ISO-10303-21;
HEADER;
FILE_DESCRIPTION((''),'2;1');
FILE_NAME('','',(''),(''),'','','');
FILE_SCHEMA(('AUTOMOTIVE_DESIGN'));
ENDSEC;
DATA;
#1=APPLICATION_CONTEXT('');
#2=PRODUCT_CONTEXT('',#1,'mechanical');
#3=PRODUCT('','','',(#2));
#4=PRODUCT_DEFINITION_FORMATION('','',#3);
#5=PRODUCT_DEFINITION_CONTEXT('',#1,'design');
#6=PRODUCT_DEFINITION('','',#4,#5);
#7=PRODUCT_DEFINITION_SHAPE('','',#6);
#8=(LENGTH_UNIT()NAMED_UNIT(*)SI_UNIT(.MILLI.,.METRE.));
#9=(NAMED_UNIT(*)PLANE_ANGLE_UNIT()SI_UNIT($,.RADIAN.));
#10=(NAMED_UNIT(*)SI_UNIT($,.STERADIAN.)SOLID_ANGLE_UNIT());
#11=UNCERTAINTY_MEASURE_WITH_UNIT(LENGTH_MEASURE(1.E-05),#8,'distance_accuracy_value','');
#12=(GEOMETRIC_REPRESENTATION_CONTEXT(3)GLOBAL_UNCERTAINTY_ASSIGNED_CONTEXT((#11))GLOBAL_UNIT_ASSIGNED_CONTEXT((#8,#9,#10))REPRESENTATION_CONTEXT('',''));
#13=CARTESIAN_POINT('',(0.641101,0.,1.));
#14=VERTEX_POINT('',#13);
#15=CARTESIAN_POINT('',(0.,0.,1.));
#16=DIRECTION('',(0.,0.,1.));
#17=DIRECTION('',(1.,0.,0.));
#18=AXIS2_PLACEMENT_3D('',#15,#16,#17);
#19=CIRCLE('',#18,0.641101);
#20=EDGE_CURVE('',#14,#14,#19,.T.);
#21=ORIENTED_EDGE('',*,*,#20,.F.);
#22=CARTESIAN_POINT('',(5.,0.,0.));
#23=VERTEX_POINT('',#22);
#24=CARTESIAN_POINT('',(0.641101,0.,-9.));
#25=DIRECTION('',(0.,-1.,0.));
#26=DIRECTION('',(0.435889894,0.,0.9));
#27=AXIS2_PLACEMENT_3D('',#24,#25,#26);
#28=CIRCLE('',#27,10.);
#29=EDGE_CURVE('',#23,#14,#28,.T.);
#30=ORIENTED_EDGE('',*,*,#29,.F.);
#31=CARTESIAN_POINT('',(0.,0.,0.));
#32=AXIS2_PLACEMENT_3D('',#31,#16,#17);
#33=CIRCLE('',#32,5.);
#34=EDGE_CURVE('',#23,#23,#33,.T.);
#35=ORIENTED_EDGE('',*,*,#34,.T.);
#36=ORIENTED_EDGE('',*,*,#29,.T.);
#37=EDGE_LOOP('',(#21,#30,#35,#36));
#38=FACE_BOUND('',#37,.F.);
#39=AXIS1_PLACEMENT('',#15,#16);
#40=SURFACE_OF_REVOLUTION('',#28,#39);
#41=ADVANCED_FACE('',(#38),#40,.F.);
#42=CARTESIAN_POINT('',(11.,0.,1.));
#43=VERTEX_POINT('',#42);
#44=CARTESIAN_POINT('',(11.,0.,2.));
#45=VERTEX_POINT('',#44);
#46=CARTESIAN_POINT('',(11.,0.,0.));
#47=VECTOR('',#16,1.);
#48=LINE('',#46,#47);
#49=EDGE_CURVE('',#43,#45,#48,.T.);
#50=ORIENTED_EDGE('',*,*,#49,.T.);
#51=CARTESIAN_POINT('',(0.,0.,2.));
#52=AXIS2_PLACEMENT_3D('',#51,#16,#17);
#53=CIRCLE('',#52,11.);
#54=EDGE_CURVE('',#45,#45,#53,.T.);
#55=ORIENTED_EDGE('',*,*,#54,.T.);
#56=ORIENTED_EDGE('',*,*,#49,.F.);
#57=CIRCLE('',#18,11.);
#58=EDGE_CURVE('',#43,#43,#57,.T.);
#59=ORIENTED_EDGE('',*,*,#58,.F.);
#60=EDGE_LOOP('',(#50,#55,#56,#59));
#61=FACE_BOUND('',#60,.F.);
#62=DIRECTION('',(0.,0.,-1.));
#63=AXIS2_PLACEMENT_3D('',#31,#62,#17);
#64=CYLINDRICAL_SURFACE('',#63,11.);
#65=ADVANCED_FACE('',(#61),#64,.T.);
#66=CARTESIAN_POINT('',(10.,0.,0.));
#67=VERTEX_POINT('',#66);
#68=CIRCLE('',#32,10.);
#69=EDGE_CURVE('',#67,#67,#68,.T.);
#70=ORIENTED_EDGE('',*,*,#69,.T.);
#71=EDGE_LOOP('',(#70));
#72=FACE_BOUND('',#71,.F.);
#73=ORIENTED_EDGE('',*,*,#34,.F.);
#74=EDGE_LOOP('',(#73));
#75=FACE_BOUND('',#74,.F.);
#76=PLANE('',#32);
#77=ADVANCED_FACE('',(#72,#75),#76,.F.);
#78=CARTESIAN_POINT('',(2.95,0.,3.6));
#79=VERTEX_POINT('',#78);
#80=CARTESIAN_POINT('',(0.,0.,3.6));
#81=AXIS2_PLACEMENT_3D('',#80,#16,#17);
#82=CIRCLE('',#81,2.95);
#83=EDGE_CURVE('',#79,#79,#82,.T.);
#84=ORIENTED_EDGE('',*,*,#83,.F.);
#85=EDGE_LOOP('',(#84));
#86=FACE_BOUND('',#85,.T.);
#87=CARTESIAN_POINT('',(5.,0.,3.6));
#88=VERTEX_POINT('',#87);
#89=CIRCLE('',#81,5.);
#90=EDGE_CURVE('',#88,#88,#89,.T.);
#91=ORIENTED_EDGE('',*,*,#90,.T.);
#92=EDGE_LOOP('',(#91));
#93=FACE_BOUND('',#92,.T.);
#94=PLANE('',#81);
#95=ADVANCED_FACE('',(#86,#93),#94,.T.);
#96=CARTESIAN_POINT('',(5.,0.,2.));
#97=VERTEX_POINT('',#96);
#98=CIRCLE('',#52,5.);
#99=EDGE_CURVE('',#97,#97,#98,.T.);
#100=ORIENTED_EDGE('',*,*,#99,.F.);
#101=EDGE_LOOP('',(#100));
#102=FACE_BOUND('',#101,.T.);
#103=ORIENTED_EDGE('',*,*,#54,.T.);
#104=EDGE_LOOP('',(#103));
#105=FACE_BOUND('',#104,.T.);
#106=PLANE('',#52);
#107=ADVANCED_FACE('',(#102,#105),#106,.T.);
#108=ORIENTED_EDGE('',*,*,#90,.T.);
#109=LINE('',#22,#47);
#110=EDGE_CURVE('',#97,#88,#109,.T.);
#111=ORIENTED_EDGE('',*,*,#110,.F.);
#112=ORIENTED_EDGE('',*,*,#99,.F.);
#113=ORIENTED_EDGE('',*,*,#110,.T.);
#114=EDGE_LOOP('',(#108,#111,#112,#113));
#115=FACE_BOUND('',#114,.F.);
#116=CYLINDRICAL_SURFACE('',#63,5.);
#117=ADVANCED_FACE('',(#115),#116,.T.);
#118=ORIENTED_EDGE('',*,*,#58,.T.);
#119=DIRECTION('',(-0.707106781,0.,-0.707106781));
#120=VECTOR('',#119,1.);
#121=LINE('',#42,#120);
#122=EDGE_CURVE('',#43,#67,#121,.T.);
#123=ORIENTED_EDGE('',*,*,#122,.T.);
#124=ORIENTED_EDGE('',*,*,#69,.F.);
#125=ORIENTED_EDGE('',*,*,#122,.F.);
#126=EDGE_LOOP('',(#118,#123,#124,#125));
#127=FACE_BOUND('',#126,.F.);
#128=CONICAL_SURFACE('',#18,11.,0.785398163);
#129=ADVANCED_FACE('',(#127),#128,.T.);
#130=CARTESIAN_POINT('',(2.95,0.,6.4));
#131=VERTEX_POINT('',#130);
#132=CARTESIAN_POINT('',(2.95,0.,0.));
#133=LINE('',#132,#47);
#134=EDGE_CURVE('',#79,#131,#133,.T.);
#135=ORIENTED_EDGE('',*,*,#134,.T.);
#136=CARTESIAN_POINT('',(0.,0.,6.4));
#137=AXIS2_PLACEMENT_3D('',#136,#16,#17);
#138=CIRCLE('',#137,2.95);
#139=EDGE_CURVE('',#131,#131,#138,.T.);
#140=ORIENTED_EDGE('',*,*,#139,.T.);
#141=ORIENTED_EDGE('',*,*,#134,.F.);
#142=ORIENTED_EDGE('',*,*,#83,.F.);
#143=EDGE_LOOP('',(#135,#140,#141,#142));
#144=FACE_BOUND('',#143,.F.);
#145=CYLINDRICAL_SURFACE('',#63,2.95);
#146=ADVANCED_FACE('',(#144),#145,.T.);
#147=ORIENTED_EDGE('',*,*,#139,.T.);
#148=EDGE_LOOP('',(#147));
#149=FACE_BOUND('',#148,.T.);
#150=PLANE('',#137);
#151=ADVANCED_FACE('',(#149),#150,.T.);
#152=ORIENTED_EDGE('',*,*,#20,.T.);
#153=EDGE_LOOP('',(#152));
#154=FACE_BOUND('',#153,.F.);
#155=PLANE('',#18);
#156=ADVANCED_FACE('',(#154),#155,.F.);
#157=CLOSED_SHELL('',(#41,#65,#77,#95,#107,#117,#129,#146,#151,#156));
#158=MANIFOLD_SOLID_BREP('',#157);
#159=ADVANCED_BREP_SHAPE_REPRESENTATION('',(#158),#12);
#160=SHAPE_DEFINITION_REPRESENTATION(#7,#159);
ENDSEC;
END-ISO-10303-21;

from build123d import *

# Parameters (mm, degrees)
F0_R     = 11
F0_R_2   = 5
F1_DEPTH = 2
F0_R_3   = 2.95
F2_DEPTH = 3.6
F0_R_4   = 1.8
F3_DEPTH = 6.4
F4_DEPTH = 1
F5_SIZE  = 1


# Not quite as in the source:
# - a fillet or chamfer that OpenCascade refuses, or shapes differently, is made with other operations: its cross-section is extruded or revolved along the edge and cut away or added
# - a feature of the source that left no trace in its solid (it failed there, or was rolled back) is left out


with BuildPart() as f1:
    # F0 (on Top) → F1 (new body)
    with BuildSketch(Plane.XY):
        Circle(F0_R)
        Circle(F0_R_2, mode=Mode.SUBTRACT)
    extrude(amount=F1_DEPTH)

    # F0 (on Top) → F2 (join)
    with BuildSketch(Plane.XY):
        Circle(F0_R_2)
        Circle(F0_R_3, mode=Mode.SUBTRACT)
    extrude(amount=F2_DEPTH)

    # F0 (on Top) → F3 (join)
    with BuildSketch(Plane.XY):
        Circle(F0_R_3)
        Circle(F0_R_4, mode=Mode.SUBTRACT)
        Circle(F0_R_4)
    extrude(amount=F3_DEPTH)

    # F0 (on Top) → F4 (cut)
    with BuildSketch(Plane.XY):
        Circle(F0_R_2)
        Circle(F0_R_3, mode=Mode.SUBTRACT)
        Circle(F0_R_3)
        Circle(F0_R_4, mode=Mode.SUBTRACT)
        Circle(F0_R_4)
    extrude(amount=F4_DEPTH, mode=Mode.SUBTRACT)

    # F5
    f5_edges = [f1.edges().sort_by_distance(p)[0] for p in [
        (-11, 0, 0),
    ]]
    chamfer(f5_edges, length=F5_SIZE)

    # F6: fillet of radius 10 on 1 edges, made by hand

    # F6_s1 → F6_t2 (revolve)
    with BuildSketch(Plane.XZ):
        with BuildLine():
            ThreePointArc((5, 0), (2.877169034, 0.7467943448), (0.6411010565, 1))
            Line((0.6411010565, 1), (5, 1))
            Line((5, 1), (5, 0))
        make_face()
    revolve(axis=Axis((0, 0, 1), (0, 0, 1)))


solid = f1.part
